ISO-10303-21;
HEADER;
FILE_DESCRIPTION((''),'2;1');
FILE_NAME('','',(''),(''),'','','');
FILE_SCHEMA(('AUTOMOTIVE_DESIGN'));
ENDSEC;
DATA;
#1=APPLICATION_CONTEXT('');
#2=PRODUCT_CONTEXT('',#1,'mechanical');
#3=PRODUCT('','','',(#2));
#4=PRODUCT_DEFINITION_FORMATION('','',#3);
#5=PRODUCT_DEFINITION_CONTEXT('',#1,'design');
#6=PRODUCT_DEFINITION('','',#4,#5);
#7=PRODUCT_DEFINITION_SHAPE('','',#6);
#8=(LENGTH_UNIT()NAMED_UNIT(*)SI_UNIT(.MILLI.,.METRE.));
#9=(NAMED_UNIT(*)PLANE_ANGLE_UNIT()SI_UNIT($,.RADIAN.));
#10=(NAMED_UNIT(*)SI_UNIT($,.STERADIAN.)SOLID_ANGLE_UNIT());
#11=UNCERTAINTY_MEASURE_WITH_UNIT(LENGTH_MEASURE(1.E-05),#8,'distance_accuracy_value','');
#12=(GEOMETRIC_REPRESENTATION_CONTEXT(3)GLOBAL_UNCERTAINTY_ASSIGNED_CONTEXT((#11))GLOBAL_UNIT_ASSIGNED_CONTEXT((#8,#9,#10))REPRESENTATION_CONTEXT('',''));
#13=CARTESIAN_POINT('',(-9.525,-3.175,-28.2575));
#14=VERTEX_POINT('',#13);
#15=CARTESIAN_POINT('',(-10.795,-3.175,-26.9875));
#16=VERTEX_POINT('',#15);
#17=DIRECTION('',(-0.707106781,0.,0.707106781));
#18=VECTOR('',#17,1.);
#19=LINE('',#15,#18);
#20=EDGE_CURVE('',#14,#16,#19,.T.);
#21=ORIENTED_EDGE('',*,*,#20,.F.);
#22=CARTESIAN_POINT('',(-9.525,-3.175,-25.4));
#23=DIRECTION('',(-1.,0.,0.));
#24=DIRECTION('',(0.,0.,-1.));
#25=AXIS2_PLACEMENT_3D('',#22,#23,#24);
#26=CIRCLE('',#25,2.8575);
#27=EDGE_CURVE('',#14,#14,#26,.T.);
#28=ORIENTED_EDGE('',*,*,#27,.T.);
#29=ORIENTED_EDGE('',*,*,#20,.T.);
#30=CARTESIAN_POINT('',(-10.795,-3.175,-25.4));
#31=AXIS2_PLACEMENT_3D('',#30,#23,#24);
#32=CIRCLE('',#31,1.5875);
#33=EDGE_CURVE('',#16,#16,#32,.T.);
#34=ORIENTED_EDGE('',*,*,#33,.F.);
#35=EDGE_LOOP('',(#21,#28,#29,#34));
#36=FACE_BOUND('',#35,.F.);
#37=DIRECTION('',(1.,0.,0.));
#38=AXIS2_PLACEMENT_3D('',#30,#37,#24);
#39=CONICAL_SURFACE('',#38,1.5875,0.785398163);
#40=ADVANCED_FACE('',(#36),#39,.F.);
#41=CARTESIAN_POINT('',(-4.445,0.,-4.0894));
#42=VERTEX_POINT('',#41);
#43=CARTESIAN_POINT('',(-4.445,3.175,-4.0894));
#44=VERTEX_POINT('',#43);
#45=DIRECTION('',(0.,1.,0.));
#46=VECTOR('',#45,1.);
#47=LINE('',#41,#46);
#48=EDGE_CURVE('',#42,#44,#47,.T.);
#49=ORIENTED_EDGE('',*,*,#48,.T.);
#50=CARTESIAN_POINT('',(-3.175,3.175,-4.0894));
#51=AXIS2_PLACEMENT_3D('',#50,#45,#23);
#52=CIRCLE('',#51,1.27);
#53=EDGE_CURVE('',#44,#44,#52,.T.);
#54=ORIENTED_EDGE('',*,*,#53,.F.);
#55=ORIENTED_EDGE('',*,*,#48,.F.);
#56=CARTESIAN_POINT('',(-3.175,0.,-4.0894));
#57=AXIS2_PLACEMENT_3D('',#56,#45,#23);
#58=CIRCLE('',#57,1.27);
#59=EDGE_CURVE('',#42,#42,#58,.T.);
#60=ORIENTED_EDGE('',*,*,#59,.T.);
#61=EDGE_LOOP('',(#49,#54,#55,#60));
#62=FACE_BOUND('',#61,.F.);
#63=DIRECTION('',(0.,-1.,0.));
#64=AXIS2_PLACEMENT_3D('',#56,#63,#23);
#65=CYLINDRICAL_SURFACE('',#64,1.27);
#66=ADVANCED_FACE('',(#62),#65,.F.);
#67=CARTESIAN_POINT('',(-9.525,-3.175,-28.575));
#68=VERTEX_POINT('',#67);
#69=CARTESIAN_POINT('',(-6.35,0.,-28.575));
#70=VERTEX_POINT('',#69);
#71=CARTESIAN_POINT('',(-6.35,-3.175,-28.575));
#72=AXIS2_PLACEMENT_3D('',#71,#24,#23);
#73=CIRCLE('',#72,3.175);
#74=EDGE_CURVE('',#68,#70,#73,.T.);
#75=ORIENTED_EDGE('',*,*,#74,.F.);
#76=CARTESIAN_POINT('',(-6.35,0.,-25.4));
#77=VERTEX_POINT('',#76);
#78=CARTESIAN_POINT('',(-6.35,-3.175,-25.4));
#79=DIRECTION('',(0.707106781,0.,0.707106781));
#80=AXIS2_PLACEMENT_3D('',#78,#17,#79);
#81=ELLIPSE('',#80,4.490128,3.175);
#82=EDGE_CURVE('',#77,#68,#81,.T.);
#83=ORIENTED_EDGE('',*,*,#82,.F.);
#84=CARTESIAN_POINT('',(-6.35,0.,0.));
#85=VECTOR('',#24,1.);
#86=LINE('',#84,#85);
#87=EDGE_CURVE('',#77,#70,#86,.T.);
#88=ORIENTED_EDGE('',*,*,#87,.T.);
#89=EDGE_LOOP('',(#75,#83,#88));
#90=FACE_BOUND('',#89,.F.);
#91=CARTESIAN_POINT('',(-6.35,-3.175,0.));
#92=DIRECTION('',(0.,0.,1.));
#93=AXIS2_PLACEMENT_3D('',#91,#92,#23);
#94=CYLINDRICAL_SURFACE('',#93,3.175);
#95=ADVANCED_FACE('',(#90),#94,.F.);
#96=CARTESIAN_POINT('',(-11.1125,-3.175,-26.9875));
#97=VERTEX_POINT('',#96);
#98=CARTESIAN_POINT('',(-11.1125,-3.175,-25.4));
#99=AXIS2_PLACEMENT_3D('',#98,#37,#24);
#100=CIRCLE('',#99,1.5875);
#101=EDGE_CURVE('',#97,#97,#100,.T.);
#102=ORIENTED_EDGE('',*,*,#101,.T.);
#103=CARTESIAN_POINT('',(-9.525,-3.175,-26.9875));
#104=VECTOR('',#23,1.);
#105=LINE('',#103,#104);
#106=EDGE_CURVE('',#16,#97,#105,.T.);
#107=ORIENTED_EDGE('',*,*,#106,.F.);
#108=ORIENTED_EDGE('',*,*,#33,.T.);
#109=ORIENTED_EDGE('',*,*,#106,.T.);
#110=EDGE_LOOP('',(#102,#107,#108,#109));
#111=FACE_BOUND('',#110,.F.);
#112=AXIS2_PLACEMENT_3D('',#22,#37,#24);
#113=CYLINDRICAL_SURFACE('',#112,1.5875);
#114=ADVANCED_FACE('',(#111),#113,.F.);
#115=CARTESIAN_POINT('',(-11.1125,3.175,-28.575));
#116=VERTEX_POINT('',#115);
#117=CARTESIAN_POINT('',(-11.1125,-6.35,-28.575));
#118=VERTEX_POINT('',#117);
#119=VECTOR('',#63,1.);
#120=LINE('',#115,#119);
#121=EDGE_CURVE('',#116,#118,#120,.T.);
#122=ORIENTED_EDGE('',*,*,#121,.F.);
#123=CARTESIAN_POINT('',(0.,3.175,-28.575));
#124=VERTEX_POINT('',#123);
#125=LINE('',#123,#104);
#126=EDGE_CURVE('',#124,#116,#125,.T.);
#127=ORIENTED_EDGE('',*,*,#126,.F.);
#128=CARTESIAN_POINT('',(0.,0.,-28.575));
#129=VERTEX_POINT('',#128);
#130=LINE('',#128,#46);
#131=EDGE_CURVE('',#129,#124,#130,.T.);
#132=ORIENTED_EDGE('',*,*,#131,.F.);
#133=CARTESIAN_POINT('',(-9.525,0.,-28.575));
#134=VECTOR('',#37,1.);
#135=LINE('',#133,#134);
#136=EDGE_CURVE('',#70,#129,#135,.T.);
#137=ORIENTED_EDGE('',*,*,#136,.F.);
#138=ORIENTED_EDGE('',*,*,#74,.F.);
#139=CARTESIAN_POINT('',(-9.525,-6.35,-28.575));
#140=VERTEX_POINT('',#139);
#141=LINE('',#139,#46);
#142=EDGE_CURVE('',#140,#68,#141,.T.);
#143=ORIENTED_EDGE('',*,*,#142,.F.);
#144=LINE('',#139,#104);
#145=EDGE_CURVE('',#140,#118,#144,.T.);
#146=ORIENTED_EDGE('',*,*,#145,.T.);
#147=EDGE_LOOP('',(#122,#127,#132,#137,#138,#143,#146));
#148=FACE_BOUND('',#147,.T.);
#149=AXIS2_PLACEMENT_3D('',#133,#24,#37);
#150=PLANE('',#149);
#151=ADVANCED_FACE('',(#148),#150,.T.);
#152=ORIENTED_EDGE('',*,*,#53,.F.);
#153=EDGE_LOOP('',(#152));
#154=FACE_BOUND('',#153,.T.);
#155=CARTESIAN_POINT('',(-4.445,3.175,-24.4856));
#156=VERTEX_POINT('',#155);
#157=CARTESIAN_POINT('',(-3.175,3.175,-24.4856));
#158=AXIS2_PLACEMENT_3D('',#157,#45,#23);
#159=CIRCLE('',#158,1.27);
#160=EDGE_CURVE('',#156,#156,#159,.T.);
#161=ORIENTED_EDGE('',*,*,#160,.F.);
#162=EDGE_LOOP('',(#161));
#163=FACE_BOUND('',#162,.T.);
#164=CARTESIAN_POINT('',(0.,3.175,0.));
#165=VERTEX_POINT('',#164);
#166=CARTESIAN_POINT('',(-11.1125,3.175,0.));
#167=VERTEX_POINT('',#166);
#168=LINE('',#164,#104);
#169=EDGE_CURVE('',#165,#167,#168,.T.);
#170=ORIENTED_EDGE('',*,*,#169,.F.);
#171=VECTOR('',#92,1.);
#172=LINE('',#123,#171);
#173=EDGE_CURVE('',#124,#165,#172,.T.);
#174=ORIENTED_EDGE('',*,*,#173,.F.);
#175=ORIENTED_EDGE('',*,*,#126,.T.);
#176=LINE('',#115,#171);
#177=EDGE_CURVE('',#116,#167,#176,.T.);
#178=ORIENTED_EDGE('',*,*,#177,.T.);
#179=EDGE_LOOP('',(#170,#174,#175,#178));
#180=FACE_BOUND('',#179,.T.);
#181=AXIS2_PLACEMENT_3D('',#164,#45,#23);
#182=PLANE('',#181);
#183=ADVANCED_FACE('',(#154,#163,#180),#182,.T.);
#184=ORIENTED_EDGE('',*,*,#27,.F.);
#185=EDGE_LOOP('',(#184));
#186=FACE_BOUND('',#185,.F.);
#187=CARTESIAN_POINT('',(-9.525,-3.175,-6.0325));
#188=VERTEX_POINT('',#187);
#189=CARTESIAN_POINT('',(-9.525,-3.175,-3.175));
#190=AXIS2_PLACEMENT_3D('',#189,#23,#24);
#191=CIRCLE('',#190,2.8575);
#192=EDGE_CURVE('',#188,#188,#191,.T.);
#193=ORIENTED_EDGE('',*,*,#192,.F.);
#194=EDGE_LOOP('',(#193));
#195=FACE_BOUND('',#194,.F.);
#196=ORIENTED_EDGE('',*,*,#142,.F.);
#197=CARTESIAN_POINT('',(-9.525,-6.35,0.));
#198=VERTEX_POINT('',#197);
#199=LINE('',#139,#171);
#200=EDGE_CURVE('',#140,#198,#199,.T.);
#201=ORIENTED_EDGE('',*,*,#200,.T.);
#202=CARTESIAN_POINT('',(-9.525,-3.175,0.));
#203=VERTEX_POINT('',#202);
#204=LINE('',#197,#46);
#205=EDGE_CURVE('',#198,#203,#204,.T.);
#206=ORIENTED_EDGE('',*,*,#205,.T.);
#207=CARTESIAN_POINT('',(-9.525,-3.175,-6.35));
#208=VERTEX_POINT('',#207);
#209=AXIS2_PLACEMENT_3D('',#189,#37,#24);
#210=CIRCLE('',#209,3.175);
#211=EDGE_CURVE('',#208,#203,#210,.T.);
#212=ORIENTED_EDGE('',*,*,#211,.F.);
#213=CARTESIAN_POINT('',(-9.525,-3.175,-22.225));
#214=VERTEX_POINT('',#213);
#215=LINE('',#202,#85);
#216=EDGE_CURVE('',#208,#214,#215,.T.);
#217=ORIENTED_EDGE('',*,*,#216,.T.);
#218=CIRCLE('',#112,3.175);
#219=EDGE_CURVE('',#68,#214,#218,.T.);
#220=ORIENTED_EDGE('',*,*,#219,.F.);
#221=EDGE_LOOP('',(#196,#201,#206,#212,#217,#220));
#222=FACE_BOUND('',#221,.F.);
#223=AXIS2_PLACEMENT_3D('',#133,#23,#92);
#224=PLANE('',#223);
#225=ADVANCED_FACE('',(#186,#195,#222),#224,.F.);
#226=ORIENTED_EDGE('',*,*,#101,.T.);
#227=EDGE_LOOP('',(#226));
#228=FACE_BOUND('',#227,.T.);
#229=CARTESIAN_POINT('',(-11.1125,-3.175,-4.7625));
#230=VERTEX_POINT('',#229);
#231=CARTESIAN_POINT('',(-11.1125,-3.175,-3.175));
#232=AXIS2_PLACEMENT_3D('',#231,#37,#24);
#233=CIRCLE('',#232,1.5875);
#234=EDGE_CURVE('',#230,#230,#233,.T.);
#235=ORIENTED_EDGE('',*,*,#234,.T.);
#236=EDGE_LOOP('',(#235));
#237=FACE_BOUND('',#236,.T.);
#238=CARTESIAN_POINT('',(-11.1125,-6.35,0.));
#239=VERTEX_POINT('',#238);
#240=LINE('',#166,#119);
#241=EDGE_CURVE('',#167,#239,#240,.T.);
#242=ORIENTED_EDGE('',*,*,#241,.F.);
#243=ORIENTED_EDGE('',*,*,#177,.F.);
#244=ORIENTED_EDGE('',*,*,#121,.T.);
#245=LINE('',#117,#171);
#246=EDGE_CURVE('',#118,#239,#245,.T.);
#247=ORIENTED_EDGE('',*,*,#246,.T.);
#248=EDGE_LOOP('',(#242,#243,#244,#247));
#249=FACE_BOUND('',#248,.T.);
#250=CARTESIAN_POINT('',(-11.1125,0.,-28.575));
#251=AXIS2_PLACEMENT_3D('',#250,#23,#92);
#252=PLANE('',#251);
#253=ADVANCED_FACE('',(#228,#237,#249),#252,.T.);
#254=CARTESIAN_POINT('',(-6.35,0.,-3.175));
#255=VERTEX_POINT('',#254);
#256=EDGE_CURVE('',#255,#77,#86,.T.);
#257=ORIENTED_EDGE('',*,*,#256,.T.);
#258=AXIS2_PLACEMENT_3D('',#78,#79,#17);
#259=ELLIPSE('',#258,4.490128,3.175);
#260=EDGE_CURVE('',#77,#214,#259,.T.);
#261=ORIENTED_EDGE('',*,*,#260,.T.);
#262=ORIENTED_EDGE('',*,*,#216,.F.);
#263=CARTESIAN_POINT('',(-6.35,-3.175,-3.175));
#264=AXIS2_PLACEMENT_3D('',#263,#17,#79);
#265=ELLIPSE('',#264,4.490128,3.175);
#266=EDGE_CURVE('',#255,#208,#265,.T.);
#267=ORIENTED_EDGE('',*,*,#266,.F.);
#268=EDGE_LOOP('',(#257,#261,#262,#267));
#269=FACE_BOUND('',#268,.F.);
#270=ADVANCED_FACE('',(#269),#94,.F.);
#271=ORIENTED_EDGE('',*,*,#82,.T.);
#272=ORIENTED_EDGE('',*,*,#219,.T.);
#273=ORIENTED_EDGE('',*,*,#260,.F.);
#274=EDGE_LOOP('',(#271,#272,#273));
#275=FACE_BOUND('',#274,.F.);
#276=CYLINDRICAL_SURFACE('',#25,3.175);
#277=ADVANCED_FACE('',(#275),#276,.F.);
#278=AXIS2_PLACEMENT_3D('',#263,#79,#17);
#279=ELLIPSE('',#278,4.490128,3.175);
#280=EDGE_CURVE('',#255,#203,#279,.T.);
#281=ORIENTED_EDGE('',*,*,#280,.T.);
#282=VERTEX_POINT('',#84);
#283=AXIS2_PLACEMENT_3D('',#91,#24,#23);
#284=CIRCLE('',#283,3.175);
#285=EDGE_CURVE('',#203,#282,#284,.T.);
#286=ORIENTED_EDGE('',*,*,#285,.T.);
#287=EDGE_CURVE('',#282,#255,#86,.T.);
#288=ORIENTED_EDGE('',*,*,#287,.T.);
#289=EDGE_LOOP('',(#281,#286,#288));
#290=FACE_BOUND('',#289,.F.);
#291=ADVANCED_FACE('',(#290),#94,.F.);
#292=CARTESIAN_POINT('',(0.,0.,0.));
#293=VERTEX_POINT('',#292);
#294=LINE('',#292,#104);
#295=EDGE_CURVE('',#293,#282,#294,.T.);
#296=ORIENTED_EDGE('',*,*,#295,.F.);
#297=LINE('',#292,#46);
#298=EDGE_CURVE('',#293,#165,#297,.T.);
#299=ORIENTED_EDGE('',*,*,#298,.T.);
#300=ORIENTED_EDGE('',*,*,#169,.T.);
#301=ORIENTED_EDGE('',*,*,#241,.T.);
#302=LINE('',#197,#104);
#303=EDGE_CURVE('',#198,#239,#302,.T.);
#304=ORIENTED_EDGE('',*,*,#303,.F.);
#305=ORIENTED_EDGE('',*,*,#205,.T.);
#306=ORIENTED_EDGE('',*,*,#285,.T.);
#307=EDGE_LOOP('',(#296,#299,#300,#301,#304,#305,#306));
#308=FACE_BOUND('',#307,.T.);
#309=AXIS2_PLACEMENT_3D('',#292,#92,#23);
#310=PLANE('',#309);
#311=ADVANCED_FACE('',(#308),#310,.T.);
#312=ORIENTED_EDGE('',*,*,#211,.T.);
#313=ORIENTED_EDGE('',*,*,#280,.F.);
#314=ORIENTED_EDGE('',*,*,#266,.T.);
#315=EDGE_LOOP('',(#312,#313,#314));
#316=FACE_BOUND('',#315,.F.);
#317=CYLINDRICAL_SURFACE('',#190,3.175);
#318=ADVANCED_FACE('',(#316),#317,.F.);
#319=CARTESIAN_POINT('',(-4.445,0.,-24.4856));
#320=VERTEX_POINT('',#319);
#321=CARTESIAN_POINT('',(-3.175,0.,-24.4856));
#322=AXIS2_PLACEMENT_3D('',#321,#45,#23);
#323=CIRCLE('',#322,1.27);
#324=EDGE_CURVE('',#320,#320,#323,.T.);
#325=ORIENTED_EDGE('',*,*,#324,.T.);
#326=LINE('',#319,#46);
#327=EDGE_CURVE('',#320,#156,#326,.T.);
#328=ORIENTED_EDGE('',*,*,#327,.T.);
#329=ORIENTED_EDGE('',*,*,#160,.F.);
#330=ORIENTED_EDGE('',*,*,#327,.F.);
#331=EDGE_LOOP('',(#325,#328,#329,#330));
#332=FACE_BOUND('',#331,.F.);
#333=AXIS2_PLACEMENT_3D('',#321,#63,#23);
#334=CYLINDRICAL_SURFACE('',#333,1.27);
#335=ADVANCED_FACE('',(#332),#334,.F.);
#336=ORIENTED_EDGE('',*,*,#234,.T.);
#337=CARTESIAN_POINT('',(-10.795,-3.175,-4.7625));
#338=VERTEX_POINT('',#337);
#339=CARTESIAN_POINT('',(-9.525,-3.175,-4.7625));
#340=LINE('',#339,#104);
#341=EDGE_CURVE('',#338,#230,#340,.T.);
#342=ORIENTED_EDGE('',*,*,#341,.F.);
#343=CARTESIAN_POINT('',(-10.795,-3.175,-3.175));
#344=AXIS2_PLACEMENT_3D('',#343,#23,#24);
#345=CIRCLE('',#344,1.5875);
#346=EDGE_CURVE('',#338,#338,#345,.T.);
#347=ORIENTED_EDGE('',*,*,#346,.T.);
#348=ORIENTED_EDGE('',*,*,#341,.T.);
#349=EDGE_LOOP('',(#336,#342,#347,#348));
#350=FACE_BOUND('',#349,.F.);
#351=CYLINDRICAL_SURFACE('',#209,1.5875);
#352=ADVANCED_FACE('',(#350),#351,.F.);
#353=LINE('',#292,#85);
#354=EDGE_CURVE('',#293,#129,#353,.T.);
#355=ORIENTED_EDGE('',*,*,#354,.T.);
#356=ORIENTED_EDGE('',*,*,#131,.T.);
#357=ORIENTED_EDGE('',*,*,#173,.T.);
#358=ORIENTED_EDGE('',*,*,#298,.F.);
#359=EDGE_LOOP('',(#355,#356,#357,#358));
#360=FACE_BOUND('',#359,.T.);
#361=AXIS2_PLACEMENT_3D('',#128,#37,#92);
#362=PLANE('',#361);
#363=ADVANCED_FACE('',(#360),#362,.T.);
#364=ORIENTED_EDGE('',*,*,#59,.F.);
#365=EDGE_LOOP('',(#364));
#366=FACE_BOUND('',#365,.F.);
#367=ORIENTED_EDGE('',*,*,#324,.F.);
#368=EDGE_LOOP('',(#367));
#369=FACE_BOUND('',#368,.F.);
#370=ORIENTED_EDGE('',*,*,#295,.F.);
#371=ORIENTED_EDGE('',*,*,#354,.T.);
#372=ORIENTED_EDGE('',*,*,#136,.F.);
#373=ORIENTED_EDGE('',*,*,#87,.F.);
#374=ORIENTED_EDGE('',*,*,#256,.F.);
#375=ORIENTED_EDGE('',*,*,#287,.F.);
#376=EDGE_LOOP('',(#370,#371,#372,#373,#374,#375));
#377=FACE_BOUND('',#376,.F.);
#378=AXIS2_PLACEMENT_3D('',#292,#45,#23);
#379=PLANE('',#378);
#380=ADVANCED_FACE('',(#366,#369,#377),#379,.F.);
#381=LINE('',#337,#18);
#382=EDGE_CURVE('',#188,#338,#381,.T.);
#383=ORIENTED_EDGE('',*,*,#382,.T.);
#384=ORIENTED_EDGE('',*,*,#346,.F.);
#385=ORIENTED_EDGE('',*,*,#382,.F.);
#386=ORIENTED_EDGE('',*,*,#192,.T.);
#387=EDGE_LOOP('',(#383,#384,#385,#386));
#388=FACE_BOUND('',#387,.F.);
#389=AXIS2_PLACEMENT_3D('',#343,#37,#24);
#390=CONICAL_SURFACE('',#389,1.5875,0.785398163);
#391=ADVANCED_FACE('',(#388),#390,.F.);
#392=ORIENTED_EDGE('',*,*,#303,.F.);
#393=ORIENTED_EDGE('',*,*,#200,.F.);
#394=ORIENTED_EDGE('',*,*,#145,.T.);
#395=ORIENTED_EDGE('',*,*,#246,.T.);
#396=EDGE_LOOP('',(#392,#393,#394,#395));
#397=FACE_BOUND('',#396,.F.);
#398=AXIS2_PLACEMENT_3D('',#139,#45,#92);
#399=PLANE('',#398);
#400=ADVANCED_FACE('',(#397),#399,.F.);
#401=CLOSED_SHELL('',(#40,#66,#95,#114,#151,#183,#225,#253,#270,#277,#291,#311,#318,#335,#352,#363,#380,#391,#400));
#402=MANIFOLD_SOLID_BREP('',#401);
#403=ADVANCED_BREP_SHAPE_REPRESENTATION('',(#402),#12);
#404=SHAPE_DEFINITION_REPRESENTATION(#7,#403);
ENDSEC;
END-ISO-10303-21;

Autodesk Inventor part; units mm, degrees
ref_plane "YZ Plane" through (0, 0, 0) normal (1, 0, 0) x (0, 1, 0)
ref_plane "XZ Plane" through (0, 0, 0) normal (0, 1, 0) x (-1, 0, 0)
ref_plane "XY Plane" through (0, 0, 0) normal (0, 0, 1) x (1, 0, 0)
sketch "Sketch1" plane through (0, 0, 0) normal (0, 1, 0) x (-1, 0, 0)
  line L0 (0, 0) -> (9.525, 0)
  line L1 (9.525, 0) -> (9.525, -28.575)
  line L2 (9.525, -28.575) -> (0, -28.575)
  line L3 (0, -28.575) -> (0, 0)
  circle A0 centre (3.175, -4.0894) radius 1.27
  circle A1 centre (3.175, -24.4856) radius 1.27
  dimension "d0" = 9.525
  dimension "d1" = 28.575
  dimension "d2" = 2.54
  dimension "d3" = 2.54
  dimension "d4" = 20.3962
  dimension "d5" = 4.0894
  dimension "d6" = 6.35
extrude "Extrusion1" add sketch "Sketch1" along normal blind 3.175
sketch "Sketch2" plane through (-9.525, 0, -28.575) normal (-1, 0, 0) x (0, 0, 1)
  line L0 (28.575, 0) -> (0, 0) projected
  line L1 (28.575, 0) -> (28.575, 3.175) projected
  line L2 (0, 3.175) -> (28.575, 3.175) projected
  line L3 (0, 0) -> (0, 3.175) projected
  line L4 (28.575, 3.175) -> (0, 3.175) projected
  line L5 (28.575, 3.175) -> (0, 3.175)
  line L6 (0, 3.175) -> (0, -6.35)
  line L7 (0, -6.35) -> (28.575, -6.35)
  line L8 (28.575, -6.35) -> (28.575, 3.175)
  point P0 (28.575, 0)
  dimension "d9" = 9.525
extrude "Extrusion2" add sketch "Sketch2" along normal blind 1.5875
sketch "Sketch3" plane through (-9.525, 0, -28.575) normal (1, 0, 0) x (0, 0, -1)
  line L0 (-28.575, 0) -> (0, 0) projected
  line L1 (-28.575, -6.35) -> (-28.575, 0) projected
  line L2 (0, -6.35) -> (-28.575, -6.35) projected
  line L3 (0, 0) -> (0, -6.35) projected
  circle A0 centre (-25.4, -3.175) radius 1.5875
  circle A1 centre (-3.175, -3.175) radius 1.5875
  point P0 (-28.575, 0)
  dimension "d12" = 3.175
  dimension "d13" = 3.175
  dimension "d14" = 3.175
  dimension "d15" = 3.175
extrude "Extrusion3" cut sketch "Sketch3" against normal blind 1.5875 contours A0 | A1
fillet "Fillet1" radius 3.175 1 edges at (-9.525, 0, -14.2875)
sketch "Sketch4" plane through (-9.525, 0, -28.575) normal (1, 0, 0) x (0, 0, -1)
  arc A0 (-4.7625, -3.175) -> (-1.5875, -3.175) centre (-3.175, -3.175) ccw projected
  arc A1 (-26.9875, -3.175) -> (-23.8125, -3.175) centre (-25.4, -3.175) ccw projected
  circle A2 centre (-25.4, -3.175) radius 3.175
  circle A3 centre (-3.175, -3.175) radius 3.175
  point P0 (-28.575, 0)
  dimension "d22" = 6.35
  dimension "d23" = 6.35
extrude "Extrusion4" cut sketch "Sketch4" along normal blind 25.4
chamfer "Chamfer2" distance 1.27 angle 45 2 edges at (-9.525, -3.175, -1.5875) (-9.525, -3.175, -23.8125)
equation "\"d3\" = d2"
equation "\"d23\" = d22"
properties part number "limitSwitchHolderMount" material "ABS Plastic"
